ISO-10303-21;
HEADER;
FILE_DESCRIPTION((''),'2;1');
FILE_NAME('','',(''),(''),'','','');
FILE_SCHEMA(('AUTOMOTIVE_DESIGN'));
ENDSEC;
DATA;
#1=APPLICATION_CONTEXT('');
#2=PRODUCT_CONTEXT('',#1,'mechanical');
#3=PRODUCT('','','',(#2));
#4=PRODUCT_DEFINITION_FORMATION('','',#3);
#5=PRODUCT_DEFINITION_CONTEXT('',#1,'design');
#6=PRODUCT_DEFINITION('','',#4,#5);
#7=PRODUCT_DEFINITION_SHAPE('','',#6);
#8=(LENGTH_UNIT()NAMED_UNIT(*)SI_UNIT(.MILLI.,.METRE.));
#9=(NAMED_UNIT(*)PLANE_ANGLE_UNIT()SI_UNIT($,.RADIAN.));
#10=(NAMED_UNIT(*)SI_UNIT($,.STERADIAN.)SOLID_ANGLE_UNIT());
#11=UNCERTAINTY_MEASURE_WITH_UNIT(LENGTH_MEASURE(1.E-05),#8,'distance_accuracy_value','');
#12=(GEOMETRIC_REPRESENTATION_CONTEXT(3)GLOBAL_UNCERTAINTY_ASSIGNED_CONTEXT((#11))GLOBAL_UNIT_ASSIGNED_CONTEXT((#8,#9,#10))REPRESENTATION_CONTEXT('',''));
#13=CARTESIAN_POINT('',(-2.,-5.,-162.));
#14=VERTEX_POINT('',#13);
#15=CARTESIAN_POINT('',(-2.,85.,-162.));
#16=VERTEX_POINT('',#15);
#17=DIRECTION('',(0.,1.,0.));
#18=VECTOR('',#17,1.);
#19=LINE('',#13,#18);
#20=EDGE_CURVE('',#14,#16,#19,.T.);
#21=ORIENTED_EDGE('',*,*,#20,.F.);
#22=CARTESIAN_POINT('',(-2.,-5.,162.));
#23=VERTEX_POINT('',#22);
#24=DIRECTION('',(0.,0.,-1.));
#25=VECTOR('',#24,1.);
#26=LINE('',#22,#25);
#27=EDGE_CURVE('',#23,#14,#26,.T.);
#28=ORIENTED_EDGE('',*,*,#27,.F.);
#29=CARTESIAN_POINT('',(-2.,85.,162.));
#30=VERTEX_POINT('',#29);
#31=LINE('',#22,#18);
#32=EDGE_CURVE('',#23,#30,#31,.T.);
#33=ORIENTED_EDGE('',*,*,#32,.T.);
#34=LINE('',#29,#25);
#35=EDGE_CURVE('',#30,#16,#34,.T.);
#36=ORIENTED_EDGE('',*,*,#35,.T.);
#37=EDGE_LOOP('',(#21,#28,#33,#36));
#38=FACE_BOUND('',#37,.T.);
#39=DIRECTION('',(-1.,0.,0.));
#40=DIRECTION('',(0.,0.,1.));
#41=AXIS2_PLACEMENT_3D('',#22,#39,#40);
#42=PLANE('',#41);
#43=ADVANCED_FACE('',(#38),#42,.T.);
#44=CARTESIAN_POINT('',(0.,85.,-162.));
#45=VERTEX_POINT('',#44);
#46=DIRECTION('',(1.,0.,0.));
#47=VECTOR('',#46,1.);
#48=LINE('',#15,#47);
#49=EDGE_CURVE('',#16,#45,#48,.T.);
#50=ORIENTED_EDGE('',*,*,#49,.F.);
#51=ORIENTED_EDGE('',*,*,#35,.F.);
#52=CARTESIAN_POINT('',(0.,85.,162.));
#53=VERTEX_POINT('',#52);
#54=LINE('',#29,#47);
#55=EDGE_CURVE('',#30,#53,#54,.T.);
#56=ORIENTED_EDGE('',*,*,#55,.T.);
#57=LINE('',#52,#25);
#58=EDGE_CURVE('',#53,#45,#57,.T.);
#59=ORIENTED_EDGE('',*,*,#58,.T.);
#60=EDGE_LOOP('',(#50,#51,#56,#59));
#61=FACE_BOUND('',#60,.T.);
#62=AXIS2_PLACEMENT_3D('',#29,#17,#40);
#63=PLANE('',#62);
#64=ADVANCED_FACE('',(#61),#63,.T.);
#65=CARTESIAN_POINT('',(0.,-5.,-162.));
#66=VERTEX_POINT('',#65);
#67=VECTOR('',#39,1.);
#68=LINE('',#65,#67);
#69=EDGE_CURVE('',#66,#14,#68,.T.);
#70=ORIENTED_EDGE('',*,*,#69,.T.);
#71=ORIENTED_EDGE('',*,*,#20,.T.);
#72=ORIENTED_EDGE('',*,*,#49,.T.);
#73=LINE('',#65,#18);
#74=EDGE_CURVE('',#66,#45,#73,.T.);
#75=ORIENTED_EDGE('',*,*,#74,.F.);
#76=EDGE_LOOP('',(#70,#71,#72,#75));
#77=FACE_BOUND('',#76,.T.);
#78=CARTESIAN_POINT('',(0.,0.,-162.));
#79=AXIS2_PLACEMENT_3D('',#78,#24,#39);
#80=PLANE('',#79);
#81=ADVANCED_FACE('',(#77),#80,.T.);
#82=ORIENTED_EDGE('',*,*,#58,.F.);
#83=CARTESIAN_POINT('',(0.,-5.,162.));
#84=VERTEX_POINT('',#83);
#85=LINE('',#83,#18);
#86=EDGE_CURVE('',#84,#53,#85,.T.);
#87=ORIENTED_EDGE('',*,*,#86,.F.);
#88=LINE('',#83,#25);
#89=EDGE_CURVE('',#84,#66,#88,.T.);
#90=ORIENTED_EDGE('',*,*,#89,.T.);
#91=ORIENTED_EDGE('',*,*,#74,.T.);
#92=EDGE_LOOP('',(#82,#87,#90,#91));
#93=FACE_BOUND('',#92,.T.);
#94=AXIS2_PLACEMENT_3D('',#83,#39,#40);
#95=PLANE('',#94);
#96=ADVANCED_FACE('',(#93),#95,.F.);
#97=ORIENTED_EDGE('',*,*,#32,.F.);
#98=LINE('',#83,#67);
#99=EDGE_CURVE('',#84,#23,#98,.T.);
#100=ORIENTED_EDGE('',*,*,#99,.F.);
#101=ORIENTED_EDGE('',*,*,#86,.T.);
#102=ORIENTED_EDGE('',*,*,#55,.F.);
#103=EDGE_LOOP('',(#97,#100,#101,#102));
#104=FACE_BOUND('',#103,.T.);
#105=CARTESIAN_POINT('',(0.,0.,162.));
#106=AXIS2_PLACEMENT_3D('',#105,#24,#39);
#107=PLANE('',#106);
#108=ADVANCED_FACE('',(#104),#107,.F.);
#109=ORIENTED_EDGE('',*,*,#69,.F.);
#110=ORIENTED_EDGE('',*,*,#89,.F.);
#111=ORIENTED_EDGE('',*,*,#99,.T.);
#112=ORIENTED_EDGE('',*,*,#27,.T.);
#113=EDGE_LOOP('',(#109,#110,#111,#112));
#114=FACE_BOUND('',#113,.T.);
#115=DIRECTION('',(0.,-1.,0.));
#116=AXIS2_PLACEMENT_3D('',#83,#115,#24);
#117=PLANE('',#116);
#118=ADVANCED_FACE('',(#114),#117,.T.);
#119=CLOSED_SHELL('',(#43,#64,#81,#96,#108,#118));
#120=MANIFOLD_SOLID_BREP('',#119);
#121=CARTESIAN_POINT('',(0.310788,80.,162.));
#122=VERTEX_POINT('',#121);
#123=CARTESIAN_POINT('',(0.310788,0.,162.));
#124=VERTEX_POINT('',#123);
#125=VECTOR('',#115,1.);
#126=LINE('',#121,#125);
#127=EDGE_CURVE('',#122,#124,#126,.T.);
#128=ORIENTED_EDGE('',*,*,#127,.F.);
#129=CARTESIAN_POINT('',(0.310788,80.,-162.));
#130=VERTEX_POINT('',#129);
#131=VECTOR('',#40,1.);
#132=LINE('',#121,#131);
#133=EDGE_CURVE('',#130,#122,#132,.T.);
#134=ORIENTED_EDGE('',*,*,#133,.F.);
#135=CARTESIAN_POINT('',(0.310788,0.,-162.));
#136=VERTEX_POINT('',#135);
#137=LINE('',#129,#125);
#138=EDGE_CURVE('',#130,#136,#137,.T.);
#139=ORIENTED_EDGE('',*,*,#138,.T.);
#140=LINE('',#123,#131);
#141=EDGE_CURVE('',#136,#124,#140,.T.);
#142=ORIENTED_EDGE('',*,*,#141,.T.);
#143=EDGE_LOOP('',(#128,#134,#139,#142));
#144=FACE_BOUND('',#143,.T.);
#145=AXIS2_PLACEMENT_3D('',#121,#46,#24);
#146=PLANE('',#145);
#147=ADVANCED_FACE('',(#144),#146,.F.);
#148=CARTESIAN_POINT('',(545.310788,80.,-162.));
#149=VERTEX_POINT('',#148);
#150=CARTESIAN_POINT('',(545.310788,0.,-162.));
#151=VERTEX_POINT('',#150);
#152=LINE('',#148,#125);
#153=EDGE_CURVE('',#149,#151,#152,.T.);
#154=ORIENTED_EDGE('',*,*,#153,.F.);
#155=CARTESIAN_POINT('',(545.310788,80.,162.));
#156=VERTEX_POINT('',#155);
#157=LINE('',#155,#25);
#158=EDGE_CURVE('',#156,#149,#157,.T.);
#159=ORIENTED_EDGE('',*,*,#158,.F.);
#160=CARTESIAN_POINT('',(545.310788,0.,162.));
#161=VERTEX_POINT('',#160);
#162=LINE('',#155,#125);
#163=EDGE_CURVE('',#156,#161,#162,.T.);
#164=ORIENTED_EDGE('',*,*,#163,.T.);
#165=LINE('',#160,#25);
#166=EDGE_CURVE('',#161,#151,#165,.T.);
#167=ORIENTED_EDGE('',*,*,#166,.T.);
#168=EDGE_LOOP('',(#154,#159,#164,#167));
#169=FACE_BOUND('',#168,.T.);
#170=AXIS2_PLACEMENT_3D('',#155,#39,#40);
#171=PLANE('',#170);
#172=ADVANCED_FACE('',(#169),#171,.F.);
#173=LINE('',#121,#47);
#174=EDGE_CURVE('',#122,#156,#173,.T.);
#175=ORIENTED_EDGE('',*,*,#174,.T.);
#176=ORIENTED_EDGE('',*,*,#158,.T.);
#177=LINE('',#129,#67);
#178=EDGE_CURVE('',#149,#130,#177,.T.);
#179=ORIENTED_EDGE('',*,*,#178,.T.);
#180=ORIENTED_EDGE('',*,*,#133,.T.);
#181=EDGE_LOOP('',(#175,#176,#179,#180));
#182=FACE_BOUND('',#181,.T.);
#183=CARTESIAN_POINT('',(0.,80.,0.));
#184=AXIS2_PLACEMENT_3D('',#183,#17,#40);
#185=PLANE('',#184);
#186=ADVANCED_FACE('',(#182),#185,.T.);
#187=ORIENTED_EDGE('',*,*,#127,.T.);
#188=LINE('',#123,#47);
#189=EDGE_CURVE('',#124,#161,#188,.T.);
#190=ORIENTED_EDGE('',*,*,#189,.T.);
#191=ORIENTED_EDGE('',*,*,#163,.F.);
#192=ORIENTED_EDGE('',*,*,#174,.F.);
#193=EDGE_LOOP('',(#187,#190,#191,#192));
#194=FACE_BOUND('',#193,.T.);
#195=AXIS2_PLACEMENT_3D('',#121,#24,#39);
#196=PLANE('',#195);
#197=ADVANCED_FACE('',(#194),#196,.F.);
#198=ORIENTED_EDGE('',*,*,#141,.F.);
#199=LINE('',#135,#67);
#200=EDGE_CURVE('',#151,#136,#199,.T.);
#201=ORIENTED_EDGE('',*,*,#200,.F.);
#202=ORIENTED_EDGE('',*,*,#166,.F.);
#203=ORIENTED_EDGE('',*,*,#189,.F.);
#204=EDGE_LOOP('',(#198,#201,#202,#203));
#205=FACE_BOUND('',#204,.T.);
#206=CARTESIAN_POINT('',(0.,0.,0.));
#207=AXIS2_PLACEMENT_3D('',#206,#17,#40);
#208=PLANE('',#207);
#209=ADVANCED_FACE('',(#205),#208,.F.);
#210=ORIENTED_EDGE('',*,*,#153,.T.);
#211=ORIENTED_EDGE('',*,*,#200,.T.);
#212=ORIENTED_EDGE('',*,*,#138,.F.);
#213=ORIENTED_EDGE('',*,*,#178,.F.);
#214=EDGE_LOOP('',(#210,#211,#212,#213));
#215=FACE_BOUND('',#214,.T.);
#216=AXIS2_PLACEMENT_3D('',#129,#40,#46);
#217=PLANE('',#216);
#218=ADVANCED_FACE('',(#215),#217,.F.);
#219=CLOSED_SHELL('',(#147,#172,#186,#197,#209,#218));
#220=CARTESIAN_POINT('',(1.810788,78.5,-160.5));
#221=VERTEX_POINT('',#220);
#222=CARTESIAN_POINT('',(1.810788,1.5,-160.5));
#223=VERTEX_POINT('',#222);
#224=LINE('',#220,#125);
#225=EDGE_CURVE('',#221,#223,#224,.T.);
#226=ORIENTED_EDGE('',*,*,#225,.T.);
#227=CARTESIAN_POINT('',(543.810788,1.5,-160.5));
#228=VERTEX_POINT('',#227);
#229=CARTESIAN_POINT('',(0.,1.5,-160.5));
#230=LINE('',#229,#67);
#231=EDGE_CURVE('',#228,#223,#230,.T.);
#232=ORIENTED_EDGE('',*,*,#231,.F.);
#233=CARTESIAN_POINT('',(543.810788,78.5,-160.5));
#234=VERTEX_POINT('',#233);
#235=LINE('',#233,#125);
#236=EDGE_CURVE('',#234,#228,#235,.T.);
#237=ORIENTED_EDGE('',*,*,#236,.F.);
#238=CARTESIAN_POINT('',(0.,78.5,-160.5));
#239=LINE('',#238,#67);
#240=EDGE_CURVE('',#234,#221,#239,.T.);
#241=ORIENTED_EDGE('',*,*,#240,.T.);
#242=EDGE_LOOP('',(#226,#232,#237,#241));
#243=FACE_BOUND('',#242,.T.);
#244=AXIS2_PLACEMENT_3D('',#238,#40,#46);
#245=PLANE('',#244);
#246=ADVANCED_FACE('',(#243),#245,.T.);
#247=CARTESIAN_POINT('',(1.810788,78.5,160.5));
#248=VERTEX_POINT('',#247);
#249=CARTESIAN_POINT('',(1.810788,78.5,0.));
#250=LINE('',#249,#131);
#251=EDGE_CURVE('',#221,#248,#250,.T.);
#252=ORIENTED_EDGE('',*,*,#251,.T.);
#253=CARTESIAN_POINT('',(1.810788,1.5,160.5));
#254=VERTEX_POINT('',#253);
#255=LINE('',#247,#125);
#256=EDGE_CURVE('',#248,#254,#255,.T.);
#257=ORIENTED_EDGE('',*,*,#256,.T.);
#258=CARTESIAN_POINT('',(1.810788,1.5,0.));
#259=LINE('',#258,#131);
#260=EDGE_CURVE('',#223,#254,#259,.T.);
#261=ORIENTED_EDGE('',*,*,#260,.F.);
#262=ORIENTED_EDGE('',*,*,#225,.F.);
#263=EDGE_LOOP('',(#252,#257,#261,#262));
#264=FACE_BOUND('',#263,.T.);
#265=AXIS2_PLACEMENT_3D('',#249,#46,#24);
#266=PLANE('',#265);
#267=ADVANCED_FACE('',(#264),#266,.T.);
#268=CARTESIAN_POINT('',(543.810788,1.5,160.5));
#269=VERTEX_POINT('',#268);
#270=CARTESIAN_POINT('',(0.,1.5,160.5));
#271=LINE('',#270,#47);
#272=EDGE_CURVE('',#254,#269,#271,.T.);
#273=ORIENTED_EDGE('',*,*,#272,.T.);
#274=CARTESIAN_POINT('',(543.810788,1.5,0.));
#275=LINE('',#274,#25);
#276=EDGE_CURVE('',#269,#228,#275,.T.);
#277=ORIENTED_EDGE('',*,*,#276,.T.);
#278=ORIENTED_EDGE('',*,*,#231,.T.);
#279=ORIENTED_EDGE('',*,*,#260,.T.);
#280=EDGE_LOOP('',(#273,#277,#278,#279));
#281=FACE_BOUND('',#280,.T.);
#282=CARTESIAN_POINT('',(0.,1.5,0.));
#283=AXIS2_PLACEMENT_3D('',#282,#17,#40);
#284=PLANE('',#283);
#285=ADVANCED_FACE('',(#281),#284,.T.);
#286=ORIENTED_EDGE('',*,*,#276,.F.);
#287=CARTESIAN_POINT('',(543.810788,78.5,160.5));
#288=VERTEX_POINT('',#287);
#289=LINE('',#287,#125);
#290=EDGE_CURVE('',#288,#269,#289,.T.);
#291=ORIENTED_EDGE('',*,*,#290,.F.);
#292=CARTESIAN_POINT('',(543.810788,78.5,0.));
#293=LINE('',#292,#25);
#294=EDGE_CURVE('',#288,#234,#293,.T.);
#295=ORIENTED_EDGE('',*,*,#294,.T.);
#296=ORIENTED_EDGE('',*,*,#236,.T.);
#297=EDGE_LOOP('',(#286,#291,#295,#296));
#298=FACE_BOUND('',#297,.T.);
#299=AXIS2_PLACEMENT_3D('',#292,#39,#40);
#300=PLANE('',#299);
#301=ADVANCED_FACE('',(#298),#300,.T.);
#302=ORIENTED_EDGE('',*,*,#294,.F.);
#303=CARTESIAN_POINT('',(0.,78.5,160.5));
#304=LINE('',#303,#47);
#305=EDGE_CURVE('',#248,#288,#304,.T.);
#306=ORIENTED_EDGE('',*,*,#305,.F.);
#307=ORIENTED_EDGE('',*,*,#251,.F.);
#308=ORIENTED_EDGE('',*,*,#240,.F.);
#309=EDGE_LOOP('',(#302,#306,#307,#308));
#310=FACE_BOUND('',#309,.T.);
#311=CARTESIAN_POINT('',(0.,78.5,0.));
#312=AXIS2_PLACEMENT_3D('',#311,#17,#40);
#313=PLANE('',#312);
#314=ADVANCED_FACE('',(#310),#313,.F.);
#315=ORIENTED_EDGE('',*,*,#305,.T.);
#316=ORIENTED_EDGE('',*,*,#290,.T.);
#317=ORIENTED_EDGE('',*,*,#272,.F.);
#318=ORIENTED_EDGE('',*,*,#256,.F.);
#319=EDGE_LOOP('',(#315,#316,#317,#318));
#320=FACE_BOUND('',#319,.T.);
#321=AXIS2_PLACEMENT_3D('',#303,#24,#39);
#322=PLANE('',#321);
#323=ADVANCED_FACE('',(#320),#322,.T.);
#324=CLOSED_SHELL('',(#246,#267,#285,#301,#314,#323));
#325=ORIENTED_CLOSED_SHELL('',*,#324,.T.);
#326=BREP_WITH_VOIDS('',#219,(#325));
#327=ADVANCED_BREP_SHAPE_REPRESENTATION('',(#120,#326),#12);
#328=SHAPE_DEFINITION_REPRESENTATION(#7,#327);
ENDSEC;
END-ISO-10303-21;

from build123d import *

# Parameters (mm, degrees)
EXTRUDE_1_OUTLINE_W     = 545
EXTRUDE_1_OUTLINE_H     = 324
EXTRUDE_1_DEPTH         = 1.5
EXTRUDE_START           = 78.5
EXTRUDE_1_2_OUTLINE_W   = 545
EXTRUDE_1_2_OUTLINE_H   = 324
EXTRUDE_1_2_DEPTH       = 1.5
EXTRUDE_START_2         = 1.5
EXTRUDE_1_3_OUTLINE_W   = 545
EXTRUDE_1_3_OUTLINE_H   = 324
EXTRUDE_1_3_OUTLINE_W_2 = 542
EXTRUDE_1_3_OUTLINE_H_2 = 321
EXTRUDE_1_3_DEPTH       = 77
SKETCH_2_W              = 2
SKETCH_2_H              = 90
EXTRUDE_2_DEPTH         = 162


# Read off the part's stored shape, not the designer's step: Вытянуть-Тонкостенный1
with BuildPart() as part:
    # Вытянуть-Тонкостенный1 outline → Вытянуть-Тонкостенный1 (new body)
    with BuildSketch(Plane(origin=(0, 0, 0), x_dir=(1, 0, 0), z_dir=(0, 1, 0))):
        with Locations((272.810788, 0)):
            Rectangle(EXTRUDE_1_OUTLINE_W, EXTRUDE_1_OUTLINE_H)
    extrude(amount=EXTRUDE_1_DEPTH)



with BuildPart() as body_2:
    # Extrude 1 2 outline → Extrude 1 2 (new body)
    with BuildSketch(Plane(origin=(0, 0, 0), x_dir=(1, 0, 0), z_dir=(0, 1, 0)).offset(EXTRUDE_START)):
        with Locations((272.810788, 0)):
            Rectangle(EXTRUDE_1_2_OUTLINE_W, EXTRUDE_1_2_OUTLINE_H)
    extrude(amount=EXTRUDE_1_2_DEPTH)


with BuildPart() as part_1:
    add(part.part)

    add(body_2.part)  # Extrude 1 3 merges body 2
    # Extrude 1 3 outline → Extrude 1 3 (add)
    with BuildSketch(Plane(origin=(0, 0, 0), x_dir=(1, 0, 0), z_dir=(0, 1, 0)).offset(EXTRUDE_START_2)):
        with Locations((272.810788, 0)):
            Rectangle(EXTRUDE_1_3_OUTLINE_W, EXTRUDE_1_3_OUTLINE_H)
        with Locations((272.810788, 0)):
            Rectangle(EXTRUDE_1_3_OUTLINE_W_2, EXTRUDE_1_3_OUTLINE_H_2, mode=Mode.SUBTRACT)
    extrude(amount=EXTRUDE_1_3_DEPTH)


with BuildPart() as body_2_2:
    # Эскиз2 → Вытянуть-Тонкостенный2 (new, symmetric)
    with BuildSketch(Plane.XY):
        with Locations((-1, 40)):
            Rectangle(SKETCH_2_W, SKETCH_2_H)
    extrude(amount=EXTRUDE_2_DEPTH, both=True)


solid = Compound([part_1.part, body_2_2.part])
